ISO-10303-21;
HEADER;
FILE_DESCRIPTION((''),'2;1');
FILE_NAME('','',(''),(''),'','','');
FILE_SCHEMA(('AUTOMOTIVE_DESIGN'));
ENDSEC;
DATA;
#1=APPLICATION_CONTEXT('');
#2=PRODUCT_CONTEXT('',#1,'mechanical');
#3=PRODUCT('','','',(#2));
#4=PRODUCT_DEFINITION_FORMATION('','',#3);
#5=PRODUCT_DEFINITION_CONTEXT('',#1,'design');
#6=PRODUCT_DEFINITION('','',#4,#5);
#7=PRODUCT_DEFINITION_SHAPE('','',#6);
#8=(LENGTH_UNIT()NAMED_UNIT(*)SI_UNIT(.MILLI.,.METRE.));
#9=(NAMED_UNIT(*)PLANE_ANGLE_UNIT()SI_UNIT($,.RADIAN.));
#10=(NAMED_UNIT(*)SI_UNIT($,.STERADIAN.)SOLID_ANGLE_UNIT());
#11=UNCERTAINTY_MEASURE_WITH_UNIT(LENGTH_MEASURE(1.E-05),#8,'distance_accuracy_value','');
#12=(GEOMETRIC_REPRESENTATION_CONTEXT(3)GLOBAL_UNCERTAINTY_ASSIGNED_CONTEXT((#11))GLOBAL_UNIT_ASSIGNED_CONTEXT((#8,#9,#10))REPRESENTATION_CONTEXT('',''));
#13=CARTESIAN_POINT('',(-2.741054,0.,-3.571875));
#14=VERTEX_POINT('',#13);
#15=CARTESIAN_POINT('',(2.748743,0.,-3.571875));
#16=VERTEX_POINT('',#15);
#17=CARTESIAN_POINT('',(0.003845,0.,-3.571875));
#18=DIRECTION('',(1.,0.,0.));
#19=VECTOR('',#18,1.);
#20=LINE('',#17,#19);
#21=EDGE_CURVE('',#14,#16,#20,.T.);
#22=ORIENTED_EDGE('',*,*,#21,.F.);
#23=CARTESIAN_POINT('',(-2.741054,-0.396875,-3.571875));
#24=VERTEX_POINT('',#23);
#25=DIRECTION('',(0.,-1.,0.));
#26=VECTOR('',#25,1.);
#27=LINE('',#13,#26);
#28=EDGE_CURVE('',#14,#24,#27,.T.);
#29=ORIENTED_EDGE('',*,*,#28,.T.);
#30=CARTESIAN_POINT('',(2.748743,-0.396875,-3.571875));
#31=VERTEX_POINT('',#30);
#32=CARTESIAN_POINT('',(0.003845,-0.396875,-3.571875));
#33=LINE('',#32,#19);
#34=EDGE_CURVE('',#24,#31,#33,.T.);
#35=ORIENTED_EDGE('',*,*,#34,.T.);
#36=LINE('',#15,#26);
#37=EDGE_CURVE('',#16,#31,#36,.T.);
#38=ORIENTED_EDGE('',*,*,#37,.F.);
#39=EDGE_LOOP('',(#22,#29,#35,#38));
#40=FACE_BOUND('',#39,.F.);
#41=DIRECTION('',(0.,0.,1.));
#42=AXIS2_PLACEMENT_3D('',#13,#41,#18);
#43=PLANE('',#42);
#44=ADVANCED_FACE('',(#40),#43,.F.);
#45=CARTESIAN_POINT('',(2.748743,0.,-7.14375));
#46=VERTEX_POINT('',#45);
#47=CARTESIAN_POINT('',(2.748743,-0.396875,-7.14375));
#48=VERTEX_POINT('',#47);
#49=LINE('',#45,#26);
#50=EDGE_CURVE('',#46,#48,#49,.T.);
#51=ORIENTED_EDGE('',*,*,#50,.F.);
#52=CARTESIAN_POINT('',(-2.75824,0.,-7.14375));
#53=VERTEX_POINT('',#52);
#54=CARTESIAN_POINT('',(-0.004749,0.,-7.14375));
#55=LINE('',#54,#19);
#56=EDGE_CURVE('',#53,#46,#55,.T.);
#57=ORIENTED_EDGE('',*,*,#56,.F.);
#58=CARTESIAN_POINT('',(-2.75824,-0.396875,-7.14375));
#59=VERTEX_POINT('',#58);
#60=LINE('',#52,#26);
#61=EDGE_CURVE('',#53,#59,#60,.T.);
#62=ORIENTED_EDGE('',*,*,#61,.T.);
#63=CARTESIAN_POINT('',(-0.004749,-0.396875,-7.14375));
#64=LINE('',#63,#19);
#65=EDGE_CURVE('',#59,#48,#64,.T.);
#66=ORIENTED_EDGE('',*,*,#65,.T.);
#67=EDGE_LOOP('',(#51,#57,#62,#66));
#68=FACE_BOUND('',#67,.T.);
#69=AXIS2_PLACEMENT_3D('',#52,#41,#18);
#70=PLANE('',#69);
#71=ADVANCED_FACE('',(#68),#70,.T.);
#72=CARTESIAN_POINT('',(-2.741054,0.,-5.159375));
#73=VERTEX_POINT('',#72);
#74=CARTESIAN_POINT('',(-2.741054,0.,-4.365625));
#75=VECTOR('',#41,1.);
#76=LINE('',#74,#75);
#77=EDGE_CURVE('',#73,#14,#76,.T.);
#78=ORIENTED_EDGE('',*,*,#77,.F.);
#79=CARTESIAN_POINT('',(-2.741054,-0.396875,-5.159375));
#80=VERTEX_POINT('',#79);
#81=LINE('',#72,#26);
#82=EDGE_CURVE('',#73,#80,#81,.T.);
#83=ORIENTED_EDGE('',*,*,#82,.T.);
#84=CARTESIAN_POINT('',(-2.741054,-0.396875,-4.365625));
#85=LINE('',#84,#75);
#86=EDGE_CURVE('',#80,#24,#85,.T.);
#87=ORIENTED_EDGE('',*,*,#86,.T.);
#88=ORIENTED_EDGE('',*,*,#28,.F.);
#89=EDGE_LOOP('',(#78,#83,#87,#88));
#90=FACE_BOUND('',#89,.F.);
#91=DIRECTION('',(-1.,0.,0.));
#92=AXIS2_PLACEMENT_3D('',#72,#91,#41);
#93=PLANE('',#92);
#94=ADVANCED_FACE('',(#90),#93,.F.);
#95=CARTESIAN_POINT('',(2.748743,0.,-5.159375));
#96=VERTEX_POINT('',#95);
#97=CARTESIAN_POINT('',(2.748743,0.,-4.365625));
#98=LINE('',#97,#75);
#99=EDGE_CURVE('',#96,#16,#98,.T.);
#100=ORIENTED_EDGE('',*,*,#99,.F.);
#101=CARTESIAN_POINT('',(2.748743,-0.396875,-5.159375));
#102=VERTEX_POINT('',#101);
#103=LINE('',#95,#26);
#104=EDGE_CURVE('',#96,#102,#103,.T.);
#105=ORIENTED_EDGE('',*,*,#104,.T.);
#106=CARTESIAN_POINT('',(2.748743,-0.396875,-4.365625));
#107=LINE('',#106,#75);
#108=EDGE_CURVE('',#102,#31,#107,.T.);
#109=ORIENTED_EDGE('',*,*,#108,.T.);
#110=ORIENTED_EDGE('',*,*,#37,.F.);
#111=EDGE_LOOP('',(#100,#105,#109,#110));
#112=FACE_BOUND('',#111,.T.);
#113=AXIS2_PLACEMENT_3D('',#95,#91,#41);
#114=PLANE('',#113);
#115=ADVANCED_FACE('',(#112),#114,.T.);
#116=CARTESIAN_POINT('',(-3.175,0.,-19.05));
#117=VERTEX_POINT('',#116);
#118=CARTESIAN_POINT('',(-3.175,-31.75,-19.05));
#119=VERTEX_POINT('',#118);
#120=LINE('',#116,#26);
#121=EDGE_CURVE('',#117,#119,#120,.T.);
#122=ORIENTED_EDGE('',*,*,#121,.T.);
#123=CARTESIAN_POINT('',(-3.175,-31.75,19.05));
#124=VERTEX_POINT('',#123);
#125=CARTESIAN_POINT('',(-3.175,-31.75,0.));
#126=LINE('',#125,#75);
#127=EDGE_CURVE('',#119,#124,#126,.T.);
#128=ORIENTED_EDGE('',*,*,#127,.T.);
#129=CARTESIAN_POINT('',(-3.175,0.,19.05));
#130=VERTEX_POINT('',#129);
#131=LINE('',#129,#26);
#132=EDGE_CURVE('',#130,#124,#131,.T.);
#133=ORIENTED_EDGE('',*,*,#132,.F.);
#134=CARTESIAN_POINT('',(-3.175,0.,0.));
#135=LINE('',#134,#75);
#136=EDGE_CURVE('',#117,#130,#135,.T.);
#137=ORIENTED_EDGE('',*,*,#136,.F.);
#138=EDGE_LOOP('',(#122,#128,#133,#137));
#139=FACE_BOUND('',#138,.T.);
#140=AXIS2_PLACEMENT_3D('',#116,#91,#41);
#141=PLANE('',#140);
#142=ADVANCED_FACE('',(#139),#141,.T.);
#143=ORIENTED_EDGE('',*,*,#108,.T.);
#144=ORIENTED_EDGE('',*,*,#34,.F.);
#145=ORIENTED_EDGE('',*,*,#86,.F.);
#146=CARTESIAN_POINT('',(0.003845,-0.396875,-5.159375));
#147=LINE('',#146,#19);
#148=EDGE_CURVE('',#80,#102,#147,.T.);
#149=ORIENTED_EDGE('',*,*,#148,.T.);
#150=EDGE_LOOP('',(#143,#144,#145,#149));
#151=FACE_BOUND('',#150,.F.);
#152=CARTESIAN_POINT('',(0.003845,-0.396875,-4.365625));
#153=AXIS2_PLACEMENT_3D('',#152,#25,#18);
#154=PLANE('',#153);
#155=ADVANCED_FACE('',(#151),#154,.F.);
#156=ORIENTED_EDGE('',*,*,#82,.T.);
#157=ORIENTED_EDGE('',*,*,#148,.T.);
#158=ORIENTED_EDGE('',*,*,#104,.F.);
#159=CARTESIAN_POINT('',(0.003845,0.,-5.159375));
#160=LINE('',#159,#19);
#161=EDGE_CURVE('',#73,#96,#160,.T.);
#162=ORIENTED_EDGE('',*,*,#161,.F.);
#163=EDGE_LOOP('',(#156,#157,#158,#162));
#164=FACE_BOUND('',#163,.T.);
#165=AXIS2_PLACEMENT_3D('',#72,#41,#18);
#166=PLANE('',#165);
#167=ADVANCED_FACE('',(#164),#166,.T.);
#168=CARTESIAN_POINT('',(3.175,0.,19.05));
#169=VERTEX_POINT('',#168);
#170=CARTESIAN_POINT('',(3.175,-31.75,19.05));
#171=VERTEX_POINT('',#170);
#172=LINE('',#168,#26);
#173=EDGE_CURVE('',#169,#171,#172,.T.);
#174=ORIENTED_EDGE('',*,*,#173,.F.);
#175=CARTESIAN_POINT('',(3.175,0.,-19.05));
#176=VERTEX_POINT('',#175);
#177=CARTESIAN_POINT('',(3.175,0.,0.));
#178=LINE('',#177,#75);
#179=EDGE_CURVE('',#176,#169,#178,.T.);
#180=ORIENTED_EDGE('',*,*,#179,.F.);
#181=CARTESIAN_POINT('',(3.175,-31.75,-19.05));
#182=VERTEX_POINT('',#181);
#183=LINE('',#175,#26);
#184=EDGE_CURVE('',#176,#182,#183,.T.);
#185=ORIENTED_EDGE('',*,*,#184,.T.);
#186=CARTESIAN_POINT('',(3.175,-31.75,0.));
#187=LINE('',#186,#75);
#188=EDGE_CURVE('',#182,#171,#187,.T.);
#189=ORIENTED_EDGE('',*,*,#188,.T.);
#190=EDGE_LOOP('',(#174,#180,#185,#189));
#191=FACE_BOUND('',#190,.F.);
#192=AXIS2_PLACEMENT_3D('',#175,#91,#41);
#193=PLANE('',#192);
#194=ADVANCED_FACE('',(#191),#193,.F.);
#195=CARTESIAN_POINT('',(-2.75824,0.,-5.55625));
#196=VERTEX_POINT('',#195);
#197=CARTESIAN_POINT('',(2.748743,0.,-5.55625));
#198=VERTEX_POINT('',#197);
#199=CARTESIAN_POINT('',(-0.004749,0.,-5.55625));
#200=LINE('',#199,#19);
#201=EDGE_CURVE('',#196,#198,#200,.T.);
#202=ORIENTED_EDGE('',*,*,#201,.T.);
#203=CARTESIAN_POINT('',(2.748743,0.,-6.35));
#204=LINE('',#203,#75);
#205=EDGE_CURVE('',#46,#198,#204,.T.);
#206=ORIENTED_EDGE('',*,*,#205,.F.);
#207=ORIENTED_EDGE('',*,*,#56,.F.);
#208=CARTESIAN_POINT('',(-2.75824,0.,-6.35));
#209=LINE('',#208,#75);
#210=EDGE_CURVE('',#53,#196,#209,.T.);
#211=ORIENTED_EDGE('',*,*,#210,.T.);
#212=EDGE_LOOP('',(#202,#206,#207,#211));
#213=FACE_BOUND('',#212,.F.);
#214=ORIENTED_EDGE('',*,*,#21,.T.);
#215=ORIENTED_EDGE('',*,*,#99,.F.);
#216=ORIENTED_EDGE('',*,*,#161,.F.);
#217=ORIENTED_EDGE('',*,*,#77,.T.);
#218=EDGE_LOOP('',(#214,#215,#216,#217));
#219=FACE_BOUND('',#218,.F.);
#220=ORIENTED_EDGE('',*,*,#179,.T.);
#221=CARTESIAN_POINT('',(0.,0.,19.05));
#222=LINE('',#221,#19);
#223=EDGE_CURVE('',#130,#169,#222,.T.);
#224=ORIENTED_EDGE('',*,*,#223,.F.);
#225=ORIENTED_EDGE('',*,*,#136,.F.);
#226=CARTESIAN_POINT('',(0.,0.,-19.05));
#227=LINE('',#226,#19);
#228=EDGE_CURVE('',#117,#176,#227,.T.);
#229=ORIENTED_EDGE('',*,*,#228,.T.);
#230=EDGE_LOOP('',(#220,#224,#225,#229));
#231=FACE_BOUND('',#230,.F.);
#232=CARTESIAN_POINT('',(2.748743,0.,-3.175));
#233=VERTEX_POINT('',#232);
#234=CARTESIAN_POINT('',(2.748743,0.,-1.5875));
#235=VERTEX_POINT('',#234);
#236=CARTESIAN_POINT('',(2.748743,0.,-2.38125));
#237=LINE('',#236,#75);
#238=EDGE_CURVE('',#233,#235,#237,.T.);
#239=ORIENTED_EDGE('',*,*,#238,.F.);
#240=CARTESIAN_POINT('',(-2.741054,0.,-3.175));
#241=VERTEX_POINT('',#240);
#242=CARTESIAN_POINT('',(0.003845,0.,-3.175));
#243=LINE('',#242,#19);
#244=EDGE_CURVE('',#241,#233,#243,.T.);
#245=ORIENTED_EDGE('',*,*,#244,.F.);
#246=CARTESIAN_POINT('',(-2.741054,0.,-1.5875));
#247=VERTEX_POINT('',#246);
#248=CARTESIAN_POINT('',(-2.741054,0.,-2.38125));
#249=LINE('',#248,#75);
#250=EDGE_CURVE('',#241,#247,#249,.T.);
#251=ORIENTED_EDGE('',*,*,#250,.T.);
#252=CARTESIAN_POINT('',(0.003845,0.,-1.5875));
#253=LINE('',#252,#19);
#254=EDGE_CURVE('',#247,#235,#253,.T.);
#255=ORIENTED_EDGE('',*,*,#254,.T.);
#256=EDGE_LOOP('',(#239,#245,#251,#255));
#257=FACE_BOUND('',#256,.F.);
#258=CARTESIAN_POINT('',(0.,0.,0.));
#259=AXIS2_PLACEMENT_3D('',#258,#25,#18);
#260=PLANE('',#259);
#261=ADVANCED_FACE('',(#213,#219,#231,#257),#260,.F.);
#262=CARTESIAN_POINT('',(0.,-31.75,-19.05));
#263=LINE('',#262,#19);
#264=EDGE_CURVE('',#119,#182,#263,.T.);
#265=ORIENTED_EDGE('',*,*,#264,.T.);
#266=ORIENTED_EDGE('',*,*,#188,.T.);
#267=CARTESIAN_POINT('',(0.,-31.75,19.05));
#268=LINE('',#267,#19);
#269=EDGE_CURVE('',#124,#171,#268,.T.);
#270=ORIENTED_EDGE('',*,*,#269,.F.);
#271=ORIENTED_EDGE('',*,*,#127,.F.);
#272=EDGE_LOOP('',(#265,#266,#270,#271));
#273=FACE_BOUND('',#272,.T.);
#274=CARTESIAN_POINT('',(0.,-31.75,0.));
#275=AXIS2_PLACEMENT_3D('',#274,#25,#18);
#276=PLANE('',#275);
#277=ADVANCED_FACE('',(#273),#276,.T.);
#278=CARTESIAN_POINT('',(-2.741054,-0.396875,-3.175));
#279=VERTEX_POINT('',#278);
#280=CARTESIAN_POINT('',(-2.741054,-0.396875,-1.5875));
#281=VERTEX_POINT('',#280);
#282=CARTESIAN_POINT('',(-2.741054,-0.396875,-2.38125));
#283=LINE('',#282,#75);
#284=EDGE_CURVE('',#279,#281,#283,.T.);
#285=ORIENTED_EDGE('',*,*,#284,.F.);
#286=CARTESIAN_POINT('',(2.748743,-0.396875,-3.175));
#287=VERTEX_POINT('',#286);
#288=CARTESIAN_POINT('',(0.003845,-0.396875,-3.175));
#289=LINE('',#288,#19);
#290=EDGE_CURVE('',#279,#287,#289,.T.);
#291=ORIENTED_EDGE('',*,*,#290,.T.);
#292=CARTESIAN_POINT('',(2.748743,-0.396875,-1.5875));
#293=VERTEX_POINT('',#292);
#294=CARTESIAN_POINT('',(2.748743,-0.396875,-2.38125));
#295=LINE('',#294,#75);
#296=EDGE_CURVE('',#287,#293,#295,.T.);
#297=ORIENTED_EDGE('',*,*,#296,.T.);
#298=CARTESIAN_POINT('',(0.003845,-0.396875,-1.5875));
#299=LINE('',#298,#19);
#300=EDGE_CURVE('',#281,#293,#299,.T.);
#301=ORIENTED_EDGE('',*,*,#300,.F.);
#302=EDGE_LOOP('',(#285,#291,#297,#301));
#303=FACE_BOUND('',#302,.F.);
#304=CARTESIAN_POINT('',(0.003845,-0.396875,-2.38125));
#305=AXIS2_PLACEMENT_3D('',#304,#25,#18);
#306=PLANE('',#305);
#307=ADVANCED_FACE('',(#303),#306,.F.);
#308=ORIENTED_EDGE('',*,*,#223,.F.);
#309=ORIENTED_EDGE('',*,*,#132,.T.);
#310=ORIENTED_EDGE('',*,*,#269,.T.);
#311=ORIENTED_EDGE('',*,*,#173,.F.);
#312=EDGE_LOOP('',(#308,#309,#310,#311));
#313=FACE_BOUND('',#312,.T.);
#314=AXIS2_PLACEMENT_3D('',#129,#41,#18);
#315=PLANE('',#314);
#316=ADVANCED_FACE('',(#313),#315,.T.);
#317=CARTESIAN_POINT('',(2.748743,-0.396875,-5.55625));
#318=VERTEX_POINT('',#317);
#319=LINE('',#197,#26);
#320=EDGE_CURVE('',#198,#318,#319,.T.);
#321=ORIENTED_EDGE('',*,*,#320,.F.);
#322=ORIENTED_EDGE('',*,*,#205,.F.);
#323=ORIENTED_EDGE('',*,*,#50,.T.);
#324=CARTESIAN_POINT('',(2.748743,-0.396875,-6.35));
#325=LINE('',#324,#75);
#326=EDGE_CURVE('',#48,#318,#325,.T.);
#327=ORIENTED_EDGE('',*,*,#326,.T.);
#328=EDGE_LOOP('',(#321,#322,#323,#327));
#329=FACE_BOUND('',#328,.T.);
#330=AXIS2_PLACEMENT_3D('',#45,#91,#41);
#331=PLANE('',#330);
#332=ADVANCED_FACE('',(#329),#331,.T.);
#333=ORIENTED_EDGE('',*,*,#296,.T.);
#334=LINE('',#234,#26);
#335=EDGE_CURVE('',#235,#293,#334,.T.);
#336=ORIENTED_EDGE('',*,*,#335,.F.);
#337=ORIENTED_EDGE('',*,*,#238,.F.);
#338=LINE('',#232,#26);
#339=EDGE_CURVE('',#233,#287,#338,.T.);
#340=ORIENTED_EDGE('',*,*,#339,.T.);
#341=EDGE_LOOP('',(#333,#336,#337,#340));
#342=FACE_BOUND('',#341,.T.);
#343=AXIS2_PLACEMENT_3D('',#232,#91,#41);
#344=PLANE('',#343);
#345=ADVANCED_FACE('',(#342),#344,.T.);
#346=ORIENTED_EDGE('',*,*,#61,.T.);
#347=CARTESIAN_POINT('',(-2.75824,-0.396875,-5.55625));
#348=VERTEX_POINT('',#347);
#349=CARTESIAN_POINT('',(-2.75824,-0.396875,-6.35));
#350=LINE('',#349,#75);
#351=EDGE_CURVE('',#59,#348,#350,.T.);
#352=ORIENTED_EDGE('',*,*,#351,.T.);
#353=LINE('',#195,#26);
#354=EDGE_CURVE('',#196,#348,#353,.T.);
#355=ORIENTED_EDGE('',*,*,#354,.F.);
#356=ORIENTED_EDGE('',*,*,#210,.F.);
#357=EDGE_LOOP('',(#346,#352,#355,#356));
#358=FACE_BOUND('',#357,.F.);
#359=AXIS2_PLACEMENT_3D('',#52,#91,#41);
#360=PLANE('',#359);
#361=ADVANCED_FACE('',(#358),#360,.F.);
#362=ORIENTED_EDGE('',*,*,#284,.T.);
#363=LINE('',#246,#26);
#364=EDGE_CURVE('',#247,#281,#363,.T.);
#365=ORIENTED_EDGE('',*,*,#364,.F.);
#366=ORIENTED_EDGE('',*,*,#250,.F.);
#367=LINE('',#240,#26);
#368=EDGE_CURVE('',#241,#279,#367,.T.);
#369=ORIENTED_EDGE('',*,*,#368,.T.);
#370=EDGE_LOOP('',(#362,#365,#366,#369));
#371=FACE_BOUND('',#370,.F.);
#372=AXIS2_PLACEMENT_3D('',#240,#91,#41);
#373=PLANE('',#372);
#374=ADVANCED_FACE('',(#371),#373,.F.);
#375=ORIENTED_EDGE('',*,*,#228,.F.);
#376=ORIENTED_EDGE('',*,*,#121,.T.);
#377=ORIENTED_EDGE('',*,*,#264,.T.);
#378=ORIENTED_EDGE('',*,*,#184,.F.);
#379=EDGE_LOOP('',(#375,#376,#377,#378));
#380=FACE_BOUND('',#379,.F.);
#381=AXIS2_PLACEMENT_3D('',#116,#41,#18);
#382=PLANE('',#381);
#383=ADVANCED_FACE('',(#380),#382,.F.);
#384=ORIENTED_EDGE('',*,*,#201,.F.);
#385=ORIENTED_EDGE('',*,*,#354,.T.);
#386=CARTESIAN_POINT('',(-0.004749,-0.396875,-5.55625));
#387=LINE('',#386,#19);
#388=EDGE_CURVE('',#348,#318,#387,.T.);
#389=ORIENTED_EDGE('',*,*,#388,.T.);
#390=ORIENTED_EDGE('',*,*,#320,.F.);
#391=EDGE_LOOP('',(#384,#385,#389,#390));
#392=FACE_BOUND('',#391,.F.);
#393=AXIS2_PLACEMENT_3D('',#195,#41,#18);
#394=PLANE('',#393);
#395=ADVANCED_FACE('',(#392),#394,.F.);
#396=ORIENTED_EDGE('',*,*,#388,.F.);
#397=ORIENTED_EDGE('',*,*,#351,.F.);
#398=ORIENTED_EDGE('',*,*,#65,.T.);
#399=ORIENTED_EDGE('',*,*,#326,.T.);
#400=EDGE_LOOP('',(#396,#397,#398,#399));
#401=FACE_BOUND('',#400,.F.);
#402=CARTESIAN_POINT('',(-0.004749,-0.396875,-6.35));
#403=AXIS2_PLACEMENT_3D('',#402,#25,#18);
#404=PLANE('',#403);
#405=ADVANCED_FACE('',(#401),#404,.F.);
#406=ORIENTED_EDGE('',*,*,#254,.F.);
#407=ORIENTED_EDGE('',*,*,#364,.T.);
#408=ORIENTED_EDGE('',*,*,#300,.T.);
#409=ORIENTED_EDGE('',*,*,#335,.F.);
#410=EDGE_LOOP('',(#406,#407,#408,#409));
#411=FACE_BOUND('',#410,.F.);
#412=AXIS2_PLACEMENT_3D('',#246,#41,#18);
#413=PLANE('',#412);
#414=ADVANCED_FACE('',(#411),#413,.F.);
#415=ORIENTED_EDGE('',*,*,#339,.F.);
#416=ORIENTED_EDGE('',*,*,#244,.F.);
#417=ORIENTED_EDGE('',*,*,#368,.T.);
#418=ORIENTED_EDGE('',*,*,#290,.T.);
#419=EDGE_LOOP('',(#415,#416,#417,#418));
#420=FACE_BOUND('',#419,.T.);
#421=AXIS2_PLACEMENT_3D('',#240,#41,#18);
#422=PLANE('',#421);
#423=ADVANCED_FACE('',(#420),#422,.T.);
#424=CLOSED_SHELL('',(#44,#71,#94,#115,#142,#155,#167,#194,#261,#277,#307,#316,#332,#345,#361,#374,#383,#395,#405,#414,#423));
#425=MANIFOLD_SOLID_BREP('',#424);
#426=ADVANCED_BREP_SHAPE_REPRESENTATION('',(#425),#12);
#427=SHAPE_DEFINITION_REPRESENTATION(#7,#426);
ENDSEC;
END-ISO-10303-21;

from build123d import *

# Parameters (mm, degrees)
F0_W     = 6.35
F0_H     = 38.1
F1_DEPTH = 31.75
F2_W     = 5.4897969239
F2_H     = 1.5875
F2_W_2   = 5.5069834925
F3_DEPTH = 0.396875


# Not quite as in the source:
# - a length typed as a fraction of an inch, garbled in the dataset ("3 / 203.2 mm" for 3/8 in), is restored


with BuildPart() as f1:
    # F0 (on Front) → F1 (new body)
    with BuildSketch(Plane.XZ):
        Rectangle(F0_W, F0_H)
    extrude(amount=F1_DEPTH)

    # F2 (on Front) → F3 (cut)
    with BuildSketch(Plane.XZ):
        with Locations((0.0038447615, -2.38125)):
            Rectangle(F2_W, F2_H)
        with Locations((0.0038447615, -4.365625)):
            Rectangle(F2_W, F2_H)
        with Locations((-0.0047485228, -6.35)):
            Rectangle(F2_W_2, F2_H)
    extrude(amount=F3_DEPTH, mode=Mode.SUBTRACT)


solid = f1.part
